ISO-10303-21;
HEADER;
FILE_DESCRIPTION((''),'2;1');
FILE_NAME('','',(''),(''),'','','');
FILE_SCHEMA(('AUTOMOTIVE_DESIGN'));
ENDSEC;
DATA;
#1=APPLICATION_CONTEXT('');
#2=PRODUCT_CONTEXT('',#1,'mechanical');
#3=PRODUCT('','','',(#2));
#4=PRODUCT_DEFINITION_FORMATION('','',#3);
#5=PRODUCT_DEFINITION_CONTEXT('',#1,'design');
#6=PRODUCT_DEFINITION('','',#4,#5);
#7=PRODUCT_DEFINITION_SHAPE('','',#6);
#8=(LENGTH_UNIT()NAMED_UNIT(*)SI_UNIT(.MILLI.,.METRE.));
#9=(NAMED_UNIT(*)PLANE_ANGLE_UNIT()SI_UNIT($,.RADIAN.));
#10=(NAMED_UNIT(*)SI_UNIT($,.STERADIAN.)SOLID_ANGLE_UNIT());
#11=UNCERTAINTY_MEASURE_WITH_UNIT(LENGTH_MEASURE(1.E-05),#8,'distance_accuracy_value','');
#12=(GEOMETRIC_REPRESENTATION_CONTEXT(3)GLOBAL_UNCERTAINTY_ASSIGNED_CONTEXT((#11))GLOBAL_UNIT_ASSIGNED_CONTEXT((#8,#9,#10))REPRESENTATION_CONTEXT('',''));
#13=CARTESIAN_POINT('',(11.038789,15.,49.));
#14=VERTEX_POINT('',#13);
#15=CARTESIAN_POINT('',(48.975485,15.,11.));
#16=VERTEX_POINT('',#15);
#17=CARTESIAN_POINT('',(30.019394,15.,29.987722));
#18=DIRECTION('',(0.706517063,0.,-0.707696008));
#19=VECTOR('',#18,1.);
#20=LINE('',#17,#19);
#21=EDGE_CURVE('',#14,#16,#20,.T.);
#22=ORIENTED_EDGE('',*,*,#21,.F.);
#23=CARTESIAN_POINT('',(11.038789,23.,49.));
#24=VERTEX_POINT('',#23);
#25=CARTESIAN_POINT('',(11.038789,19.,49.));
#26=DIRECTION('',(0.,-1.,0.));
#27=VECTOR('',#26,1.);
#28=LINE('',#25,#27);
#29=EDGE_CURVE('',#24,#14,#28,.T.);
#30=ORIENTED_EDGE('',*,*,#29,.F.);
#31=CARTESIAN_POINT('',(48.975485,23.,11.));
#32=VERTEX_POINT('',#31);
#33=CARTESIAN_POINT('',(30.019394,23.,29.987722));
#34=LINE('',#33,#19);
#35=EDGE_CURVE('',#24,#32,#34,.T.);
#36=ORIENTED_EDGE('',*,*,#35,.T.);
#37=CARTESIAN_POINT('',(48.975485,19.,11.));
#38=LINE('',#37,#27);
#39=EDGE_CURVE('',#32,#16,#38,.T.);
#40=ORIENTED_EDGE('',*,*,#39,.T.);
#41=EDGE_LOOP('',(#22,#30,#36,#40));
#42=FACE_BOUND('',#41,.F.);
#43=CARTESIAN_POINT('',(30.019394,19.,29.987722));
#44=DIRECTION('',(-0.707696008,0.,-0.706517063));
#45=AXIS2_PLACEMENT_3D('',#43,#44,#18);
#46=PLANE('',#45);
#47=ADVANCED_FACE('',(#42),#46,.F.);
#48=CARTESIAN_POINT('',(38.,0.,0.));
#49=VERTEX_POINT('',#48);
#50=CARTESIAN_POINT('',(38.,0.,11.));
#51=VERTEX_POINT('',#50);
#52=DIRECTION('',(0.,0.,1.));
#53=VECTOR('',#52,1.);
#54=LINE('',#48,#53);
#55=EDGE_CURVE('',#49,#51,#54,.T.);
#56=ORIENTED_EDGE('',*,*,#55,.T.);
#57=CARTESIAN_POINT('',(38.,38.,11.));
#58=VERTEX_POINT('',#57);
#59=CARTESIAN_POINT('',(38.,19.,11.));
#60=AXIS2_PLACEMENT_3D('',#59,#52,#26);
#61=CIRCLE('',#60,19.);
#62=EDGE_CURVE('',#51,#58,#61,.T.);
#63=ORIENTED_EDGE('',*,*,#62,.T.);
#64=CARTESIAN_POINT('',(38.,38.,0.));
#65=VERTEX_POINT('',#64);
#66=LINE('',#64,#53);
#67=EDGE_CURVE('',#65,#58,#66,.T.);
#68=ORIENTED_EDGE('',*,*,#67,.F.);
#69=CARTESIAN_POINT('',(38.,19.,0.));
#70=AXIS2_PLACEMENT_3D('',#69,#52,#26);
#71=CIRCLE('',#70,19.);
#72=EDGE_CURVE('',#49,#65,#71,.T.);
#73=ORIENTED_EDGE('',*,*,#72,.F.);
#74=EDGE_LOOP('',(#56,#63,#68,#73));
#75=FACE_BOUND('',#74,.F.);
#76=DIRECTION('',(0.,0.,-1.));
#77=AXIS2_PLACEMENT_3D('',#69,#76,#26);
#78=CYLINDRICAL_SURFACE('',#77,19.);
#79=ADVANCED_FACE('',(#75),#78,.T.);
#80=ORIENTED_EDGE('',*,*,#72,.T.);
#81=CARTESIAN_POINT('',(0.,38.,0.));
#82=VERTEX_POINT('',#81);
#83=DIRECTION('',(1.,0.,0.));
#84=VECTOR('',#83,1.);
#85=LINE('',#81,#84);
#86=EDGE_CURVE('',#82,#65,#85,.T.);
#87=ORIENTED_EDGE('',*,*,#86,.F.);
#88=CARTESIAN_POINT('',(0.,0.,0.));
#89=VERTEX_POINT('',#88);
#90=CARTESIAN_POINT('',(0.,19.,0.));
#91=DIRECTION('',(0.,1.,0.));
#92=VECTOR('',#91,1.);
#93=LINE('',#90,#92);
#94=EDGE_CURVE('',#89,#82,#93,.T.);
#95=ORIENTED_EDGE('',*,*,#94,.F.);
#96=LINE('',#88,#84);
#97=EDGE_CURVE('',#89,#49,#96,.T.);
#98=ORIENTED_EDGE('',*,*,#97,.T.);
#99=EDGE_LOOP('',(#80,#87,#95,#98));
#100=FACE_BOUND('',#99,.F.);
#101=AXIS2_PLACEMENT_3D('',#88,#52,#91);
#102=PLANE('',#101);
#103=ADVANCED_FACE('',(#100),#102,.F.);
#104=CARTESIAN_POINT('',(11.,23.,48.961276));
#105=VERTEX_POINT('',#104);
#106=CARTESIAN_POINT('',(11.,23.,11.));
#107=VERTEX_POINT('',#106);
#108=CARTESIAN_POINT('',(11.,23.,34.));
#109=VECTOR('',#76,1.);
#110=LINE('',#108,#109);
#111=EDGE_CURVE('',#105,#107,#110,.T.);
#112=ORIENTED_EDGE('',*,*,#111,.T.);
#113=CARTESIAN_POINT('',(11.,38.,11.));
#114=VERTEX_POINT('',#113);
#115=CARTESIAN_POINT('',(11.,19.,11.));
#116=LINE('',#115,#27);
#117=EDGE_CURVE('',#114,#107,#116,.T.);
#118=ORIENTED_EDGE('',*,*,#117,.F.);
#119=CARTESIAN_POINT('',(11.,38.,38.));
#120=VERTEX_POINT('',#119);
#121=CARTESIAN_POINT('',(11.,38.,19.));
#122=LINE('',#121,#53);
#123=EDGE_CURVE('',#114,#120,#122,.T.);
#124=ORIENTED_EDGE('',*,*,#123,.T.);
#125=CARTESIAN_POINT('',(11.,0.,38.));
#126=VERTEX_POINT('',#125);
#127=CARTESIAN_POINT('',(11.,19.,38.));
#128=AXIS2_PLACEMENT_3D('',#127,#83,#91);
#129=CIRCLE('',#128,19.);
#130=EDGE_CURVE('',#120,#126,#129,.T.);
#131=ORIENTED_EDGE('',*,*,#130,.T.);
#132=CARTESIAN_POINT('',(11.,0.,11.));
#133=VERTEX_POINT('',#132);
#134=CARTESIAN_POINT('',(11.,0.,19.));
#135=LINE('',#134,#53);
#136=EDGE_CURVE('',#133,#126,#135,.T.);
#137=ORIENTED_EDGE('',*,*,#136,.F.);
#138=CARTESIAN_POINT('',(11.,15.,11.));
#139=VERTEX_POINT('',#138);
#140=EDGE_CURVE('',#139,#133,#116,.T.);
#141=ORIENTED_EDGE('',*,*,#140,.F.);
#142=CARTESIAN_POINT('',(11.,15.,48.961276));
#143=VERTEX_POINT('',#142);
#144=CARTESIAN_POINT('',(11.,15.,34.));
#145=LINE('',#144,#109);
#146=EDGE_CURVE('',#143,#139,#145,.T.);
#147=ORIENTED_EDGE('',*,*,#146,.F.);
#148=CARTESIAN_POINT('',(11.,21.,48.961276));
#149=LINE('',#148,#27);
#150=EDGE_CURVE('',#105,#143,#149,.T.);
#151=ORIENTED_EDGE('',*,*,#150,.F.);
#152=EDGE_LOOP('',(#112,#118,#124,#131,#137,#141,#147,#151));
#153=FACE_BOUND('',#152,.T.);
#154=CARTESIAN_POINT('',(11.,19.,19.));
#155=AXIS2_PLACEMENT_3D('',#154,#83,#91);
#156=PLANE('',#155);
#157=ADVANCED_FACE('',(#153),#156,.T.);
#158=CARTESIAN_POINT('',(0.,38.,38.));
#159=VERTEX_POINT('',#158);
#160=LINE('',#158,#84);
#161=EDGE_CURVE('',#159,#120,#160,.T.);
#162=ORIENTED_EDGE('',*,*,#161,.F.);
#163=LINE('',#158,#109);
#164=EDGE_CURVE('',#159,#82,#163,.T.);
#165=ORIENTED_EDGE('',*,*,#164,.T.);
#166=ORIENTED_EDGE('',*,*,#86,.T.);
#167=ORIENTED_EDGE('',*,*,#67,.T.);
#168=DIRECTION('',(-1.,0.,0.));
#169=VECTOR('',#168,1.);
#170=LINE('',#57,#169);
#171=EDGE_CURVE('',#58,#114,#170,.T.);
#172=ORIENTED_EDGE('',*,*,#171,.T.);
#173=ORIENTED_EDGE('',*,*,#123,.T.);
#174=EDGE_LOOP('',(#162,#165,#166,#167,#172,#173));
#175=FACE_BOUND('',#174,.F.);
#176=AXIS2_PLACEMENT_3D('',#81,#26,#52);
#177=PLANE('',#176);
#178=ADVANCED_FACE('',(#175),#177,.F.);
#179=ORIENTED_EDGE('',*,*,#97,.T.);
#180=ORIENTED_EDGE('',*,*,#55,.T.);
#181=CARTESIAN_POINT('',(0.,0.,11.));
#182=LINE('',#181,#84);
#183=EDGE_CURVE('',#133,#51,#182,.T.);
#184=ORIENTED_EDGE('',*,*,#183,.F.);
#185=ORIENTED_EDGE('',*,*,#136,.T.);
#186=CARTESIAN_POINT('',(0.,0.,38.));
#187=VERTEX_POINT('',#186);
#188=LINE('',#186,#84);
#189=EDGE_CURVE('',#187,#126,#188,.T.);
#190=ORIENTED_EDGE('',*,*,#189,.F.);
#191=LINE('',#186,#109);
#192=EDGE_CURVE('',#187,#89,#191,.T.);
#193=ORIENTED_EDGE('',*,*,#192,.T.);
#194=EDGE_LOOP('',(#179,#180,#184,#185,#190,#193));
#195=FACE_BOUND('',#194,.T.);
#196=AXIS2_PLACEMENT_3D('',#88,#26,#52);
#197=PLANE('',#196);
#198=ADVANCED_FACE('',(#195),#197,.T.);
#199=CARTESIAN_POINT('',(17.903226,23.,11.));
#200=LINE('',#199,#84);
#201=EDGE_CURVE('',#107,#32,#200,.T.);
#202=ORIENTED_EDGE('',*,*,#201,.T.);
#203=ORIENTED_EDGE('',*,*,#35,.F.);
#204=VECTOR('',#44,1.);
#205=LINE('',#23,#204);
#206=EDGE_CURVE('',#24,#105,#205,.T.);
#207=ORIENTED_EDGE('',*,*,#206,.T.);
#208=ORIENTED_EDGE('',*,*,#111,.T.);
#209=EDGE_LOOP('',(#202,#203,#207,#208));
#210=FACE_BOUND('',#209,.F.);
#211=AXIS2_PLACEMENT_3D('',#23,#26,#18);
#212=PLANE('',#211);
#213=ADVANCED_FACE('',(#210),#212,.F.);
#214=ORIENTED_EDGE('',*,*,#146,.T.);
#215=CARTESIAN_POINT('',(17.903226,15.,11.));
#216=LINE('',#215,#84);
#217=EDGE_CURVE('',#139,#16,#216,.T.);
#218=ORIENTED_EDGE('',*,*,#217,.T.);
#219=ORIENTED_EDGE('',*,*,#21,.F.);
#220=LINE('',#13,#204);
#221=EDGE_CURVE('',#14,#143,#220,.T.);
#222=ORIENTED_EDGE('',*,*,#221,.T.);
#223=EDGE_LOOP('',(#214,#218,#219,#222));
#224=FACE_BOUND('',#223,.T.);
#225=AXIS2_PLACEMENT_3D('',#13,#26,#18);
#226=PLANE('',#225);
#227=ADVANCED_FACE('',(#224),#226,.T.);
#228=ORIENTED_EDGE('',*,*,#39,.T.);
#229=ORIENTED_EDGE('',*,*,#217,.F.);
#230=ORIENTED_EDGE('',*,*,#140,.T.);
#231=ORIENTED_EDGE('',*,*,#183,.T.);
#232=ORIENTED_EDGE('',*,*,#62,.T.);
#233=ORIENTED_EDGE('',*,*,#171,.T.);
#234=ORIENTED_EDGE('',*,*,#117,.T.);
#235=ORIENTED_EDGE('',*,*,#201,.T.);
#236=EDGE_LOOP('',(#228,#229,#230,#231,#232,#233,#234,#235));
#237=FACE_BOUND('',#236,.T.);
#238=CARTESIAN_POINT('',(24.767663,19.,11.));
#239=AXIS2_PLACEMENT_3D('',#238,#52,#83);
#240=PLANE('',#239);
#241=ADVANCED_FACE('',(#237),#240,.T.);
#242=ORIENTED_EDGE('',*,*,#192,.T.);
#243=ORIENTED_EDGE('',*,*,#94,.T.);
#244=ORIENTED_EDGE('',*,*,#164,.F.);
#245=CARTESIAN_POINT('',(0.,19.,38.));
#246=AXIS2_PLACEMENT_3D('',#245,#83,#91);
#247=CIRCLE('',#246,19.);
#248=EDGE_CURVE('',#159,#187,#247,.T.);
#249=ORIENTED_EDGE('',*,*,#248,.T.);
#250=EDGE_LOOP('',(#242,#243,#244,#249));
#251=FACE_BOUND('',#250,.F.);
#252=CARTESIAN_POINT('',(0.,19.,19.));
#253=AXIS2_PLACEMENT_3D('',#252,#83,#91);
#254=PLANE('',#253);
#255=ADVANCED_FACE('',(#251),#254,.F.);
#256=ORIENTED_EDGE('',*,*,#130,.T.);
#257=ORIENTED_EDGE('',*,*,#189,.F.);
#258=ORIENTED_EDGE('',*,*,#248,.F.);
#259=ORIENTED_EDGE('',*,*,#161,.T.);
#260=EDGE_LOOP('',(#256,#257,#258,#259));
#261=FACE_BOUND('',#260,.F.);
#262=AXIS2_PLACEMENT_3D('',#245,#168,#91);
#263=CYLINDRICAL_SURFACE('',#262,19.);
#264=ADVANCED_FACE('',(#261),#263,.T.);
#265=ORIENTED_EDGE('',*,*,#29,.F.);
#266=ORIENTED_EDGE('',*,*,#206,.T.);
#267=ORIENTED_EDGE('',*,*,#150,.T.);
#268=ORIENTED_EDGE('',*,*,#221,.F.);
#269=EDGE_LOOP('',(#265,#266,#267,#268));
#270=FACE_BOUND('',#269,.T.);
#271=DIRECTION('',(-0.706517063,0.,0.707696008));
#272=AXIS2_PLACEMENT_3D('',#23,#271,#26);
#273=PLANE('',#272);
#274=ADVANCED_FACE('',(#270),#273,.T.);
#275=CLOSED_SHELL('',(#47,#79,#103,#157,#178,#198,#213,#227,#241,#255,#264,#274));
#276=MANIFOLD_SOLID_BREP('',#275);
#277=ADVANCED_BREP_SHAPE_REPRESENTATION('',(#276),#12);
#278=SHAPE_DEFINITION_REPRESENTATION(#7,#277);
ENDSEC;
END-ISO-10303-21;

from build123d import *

# Parameters (mm, degrees)
F1_W     = 38
F1_H     = 38
F2_DEPTH = 11
F3_DEPTH = 11
F9_E8_W  = 53.7300702473
F9_E8_H  = 8


with BuildPart() as f2:
    # F1 (on Right) → F2 (new body)
    with BuildSketch(Plane.YZ):
        with Locations((19, 19)):
            Rectangle(F1_W, F1_H)
        with BuildLine():
            ThreePointArc((38, 38), (19, 57), (0, 38))
            Line((0, 38), (38, 38))
        make_face()
    extrude(amount=F2_DEPTH)

    # F0 (on Top) → F3 (join)
    with BuildSketch(Plane.XY):
        with BuildLine():
            Line((0, 38), (0, 0))
            Line((0, 0), (38, 0))
            ThreePointArc((38, 0), (57, 19), (38, 38))
            Line((38, 38), (0, 38))
        make_face()
    extrude(amount=F3_DEPTH)

    # F9_E8 (on explicit) → F10 (join, up to the next surface of F2)
    with BuildSketch(Plane(origin=(11.0387885943, 23, 49), x_dir=(0.7065170626, 0, -0.7076960083), z_dir=(-0.7076960083, 0, -0.7065170626))):
        with Locations((26.8650351237, 4)):
            Rectangle(F9_E8_W, F9_E8_H)
    extrude(until=Until.NEXT)


solid = f2.part
